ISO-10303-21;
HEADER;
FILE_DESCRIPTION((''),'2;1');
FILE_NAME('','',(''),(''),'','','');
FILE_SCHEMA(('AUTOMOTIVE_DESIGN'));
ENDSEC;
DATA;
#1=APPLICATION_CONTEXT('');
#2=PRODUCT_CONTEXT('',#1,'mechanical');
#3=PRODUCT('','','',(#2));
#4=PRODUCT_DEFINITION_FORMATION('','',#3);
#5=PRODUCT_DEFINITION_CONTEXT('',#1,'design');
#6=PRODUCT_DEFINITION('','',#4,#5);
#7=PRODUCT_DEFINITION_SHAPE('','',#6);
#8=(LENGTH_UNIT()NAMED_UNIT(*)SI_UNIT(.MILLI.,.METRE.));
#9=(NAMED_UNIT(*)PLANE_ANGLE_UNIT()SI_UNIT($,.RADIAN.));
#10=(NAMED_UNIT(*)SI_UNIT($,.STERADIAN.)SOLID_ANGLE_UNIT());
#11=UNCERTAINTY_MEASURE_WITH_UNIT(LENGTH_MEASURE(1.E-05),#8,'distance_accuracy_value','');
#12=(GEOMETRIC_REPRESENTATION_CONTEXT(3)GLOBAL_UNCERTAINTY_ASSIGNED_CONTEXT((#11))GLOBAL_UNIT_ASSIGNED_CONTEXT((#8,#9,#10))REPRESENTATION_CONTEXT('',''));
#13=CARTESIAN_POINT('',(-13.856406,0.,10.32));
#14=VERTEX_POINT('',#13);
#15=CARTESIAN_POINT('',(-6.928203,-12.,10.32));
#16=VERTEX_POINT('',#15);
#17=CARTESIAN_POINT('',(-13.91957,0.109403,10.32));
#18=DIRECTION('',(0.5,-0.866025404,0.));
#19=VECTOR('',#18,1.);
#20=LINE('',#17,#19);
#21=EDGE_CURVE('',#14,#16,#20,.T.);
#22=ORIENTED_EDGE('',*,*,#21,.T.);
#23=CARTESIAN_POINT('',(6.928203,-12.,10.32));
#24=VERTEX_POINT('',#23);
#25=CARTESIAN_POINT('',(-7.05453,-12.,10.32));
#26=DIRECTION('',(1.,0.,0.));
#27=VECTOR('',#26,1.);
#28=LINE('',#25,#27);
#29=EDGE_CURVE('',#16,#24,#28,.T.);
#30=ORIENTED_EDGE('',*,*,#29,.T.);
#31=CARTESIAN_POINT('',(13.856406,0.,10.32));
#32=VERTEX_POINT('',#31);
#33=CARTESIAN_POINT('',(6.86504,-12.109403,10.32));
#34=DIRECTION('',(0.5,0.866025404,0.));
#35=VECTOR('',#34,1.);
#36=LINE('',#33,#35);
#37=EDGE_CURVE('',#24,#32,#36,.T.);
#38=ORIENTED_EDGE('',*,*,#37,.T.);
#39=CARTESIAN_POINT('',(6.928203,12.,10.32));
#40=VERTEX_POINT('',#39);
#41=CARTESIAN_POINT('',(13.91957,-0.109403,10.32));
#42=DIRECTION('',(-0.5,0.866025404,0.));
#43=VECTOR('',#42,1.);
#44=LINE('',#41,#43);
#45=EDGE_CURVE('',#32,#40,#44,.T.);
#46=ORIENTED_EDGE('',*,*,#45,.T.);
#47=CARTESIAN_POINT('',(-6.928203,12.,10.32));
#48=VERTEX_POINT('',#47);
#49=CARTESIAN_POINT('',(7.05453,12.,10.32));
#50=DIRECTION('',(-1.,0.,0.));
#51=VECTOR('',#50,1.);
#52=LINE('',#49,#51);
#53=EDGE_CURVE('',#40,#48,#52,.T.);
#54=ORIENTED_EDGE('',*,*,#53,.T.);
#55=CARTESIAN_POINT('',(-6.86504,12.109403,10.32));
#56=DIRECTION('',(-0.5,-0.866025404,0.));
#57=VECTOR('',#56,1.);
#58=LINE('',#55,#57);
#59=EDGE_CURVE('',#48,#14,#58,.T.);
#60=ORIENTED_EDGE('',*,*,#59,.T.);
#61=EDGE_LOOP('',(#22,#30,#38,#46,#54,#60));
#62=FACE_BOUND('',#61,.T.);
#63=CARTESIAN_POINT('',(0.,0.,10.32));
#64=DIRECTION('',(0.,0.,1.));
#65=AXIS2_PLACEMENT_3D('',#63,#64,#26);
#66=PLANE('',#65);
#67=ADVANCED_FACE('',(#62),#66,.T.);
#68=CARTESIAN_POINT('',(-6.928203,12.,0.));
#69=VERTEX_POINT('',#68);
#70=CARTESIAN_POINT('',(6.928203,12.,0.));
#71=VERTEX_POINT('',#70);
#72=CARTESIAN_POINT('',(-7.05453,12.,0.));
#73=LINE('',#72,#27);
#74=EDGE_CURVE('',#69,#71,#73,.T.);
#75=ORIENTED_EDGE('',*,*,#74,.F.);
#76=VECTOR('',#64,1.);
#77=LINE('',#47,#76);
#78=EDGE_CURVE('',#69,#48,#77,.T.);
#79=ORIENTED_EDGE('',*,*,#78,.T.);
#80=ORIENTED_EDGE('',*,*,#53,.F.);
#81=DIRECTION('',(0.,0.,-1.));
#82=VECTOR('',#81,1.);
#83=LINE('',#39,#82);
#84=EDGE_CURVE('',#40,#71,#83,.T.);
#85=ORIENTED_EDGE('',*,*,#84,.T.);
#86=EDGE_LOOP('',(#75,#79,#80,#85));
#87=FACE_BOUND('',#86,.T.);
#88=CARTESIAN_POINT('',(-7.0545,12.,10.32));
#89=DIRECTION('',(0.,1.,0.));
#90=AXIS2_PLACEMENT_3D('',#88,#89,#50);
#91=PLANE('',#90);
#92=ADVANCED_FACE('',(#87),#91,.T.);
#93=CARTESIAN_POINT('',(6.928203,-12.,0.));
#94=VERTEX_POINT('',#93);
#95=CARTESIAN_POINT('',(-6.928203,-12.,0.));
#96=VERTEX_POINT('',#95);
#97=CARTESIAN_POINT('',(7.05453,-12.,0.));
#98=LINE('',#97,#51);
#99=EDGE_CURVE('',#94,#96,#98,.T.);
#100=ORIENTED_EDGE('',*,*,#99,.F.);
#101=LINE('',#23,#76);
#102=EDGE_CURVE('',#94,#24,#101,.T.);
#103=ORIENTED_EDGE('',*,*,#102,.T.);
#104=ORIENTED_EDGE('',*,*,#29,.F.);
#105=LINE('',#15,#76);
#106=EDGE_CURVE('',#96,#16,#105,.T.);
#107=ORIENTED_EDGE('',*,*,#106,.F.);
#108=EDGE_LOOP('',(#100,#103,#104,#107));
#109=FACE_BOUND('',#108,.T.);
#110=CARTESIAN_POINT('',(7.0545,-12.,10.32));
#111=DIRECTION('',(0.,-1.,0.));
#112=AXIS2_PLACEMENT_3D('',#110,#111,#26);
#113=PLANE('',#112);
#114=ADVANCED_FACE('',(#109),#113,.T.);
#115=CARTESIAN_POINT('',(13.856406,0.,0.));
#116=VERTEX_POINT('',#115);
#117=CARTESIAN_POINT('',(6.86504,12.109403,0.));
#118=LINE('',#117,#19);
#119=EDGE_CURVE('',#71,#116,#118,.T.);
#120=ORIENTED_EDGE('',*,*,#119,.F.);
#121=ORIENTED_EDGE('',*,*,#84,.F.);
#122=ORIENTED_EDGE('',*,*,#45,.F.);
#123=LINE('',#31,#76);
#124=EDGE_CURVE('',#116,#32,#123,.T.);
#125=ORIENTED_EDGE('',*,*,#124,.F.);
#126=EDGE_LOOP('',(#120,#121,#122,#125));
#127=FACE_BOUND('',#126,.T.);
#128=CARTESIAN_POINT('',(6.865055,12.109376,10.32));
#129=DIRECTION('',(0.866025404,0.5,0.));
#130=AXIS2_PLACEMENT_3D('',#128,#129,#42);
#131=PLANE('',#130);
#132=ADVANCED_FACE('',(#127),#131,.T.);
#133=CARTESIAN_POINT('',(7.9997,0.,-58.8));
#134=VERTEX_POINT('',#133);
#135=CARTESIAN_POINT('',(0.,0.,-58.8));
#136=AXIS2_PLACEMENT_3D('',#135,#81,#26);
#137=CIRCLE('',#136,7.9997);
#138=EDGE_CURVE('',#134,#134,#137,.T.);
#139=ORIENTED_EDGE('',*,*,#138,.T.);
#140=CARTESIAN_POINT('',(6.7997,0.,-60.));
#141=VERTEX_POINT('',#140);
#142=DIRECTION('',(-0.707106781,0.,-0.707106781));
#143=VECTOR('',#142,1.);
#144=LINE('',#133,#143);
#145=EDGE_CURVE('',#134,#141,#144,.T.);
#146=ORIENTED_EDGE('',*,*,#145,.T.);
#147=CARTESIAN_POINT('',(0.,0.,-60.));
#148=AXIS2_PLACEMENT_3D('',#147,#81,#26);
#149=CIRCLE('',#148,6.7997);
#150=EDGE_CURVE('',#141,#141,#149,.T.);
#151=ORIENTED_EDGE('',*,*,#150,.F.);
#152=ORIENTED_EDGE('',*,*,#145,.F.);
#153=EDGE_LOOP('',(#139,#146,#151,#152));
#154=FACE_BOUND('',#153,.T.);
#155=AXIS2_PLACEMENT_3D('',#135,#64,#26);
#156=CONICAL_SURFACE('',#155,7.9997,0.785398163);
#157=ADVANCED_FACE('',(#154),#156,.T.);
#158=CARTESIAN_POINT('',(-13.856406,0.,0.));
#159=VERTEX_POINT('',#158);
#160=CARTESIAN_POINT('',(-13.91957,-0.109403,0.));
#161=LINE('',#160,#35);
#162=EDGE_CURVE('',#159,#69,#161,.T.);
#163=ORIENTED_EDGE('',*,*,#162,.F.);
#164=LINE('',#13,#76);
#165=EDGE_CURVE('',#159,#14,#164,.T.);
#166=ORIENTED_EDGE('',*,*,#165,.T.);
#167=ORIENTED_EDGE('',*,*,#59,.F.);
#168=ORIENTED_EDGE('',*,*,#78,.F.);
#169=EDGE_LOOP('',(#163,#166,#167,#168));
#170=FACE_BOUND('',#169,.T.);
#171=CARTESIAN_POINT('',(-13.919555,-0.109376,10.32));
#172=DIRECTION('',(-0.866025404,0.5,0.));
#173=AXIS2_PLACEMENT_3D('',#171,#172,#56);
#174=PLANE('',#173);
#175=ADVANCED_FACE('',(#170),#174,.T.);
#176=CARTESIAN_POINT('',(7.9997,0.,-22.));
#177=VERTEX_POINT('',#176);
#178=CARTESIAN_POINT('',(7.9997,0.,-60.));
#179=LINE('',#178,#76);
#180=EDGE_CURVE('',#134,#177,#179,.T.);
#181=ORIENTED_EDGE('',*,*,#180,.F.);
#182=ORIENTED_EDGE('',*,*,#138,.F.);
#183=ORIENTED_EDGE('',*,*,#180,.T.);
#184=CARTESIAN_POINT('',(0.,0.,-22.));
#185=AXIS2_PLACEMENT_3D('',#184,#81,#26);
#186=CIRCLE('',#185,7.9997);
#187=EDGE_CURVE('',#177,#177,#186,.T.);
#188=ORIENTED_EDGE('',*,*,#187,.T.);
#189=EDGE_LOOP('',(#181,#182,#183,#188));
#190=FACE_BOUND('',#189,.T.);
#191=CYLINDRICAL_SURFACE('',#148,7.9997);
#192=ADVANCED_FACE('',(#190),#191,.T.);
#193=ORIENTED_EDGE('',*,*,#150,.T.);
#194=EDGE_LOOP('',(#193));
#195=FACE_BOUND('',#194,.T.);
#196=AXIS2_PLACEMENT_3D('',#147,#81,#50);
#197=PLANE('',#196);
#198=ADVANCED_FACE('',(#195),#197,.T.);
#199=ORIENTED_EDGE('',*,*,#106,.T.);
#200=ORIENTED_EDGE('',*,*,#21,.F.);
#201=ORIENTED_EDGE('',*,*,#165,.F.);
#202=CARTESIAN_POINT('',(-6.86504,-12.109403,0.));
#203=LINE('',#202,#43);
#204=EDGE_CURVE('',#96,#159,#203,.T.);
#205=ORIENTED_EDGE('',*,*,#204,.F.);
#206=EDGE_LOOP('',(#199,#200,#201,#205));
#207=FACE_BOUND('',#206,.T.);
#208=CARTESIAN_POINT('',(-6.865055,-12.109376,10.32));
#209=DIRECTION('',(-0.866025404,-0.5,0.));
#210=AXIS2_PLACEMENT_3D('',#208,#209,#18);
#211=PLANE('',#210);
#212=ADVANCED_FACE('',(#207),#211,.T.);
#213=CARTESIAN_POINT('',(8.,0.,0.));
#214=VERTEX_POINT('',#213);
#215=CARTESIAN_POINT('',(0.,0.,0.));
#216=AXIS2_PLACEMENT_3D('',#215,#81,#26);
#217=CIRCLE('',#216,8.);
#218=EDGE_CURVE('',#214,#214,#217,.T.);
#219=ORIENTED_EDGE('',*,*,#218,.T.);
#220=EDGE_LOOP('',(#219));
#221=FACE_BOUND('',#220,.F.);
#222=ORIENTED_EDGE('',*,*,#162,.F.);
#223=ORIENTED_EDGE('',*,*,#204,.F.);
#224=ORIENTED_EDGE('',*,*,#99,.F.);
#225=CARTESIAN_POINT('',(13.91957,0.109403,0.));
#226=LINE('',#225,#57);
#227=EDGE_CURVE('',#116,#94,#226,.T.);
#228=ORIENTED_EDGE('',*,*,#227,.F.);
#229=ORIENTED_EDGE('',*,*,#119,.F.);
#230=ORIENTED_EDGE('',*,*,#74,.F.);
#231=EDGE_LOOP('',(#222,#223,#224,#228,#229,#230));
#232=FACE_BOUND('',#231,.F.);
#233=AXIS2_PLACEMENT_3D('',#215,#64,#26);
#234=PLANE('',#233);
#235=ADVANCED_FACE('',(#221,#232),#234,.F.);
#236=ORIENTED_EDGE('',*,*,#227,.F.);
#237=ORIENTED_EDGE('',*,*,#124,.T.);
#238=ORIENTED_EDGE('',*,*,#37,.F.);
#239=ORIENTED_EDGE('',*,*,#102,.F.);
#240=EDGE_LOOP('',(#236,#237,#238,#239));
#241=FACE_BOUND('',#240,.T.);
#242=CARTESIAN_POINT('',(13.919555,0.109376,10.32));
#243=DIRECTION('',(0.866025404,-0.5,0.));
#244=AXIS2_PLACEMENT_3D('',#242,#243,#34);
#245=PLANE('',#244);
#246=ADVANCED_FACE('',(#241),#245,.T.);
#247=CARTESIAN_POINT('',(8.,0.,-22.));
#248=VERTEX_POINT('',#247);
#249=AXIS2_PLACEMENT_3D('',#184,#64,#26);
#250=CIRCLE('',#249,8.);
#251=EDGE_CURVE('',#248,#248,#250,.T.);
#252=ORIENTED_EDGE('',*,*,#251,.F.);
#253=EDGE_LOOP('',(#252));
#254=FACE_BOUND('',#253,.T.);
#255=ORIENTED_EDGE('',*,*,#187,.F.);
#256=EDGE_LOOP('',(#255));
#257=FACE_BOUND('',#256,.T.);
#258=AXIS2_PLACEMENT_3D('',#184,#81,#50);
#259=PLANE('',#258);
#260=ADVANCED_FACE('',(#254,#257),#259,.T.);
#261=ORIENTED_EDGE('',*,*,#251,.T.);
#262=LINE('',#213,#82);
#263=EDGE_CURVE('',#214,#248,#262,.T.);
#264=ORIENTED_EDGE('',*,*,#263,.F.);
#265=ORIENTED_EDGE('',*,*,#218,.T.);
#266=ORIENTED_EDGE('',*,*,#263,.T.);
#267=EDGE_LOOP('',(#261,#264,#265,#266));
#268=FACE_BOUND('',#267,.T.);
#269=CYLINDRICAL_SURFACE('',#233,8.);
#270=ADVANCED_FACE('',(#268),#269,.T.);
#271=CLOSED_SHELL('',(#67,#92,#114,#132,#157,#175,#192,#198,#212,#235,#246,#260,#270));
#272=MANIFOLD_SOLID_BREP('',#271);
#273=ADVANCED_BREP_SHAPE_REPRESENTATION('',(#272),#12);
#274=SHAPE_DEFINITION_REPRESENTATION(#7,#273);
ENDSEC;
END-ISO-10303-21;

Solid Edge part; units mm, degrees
sketch "Sketch1" plane through (0, 0, 0) normal (0, 0, 1) x (1, 0, 0)
  circle A0 centre (0, 0) radius 13.92
  dimension "D1" = 27.84
extrude "Protrusion1" add sketch "Sketch1" along normal blind 10.32
sketch "Sketch2" plane through (0, 0, 0) normal (0, 0, -1) x (1, 0, 0)
  circle A0 centre (0, 0) radius 8
extrude "Protrusion2" add sketch "Sketch2" along normal blind 60
sketch "Sketch3" plane through (0, 0, -60) normal (0, 0, -1) x (1, 0, 0)
  circle A0 centre (0, 0) radius 7.9997
extrude "Cutout1" cut sketch "Sketch3" against normal blind 38 flip side to cut
chamfer "Chamfer_1" distance 1.2 angle 45 1 edges at (-7.9997, 0, -60)
sketch "Sketch4" plane through (0, 0, 10.32) normal (0, 0, 1) x (1, 0, 0)
  line L0 (-7.0545, 12) -> (7.0545, 12)
  dimension "D1" = 24
extrude "Cutout2" cut sketch "Sketch4" against normal up to next material side at (0, 12.05, 10.32)
pattern_circular "Pattern1" count 6 over 360 about axis through (0, 0, 10.32) along (0, 0, 1) of "Cutout2"
properties part number "24101720"
